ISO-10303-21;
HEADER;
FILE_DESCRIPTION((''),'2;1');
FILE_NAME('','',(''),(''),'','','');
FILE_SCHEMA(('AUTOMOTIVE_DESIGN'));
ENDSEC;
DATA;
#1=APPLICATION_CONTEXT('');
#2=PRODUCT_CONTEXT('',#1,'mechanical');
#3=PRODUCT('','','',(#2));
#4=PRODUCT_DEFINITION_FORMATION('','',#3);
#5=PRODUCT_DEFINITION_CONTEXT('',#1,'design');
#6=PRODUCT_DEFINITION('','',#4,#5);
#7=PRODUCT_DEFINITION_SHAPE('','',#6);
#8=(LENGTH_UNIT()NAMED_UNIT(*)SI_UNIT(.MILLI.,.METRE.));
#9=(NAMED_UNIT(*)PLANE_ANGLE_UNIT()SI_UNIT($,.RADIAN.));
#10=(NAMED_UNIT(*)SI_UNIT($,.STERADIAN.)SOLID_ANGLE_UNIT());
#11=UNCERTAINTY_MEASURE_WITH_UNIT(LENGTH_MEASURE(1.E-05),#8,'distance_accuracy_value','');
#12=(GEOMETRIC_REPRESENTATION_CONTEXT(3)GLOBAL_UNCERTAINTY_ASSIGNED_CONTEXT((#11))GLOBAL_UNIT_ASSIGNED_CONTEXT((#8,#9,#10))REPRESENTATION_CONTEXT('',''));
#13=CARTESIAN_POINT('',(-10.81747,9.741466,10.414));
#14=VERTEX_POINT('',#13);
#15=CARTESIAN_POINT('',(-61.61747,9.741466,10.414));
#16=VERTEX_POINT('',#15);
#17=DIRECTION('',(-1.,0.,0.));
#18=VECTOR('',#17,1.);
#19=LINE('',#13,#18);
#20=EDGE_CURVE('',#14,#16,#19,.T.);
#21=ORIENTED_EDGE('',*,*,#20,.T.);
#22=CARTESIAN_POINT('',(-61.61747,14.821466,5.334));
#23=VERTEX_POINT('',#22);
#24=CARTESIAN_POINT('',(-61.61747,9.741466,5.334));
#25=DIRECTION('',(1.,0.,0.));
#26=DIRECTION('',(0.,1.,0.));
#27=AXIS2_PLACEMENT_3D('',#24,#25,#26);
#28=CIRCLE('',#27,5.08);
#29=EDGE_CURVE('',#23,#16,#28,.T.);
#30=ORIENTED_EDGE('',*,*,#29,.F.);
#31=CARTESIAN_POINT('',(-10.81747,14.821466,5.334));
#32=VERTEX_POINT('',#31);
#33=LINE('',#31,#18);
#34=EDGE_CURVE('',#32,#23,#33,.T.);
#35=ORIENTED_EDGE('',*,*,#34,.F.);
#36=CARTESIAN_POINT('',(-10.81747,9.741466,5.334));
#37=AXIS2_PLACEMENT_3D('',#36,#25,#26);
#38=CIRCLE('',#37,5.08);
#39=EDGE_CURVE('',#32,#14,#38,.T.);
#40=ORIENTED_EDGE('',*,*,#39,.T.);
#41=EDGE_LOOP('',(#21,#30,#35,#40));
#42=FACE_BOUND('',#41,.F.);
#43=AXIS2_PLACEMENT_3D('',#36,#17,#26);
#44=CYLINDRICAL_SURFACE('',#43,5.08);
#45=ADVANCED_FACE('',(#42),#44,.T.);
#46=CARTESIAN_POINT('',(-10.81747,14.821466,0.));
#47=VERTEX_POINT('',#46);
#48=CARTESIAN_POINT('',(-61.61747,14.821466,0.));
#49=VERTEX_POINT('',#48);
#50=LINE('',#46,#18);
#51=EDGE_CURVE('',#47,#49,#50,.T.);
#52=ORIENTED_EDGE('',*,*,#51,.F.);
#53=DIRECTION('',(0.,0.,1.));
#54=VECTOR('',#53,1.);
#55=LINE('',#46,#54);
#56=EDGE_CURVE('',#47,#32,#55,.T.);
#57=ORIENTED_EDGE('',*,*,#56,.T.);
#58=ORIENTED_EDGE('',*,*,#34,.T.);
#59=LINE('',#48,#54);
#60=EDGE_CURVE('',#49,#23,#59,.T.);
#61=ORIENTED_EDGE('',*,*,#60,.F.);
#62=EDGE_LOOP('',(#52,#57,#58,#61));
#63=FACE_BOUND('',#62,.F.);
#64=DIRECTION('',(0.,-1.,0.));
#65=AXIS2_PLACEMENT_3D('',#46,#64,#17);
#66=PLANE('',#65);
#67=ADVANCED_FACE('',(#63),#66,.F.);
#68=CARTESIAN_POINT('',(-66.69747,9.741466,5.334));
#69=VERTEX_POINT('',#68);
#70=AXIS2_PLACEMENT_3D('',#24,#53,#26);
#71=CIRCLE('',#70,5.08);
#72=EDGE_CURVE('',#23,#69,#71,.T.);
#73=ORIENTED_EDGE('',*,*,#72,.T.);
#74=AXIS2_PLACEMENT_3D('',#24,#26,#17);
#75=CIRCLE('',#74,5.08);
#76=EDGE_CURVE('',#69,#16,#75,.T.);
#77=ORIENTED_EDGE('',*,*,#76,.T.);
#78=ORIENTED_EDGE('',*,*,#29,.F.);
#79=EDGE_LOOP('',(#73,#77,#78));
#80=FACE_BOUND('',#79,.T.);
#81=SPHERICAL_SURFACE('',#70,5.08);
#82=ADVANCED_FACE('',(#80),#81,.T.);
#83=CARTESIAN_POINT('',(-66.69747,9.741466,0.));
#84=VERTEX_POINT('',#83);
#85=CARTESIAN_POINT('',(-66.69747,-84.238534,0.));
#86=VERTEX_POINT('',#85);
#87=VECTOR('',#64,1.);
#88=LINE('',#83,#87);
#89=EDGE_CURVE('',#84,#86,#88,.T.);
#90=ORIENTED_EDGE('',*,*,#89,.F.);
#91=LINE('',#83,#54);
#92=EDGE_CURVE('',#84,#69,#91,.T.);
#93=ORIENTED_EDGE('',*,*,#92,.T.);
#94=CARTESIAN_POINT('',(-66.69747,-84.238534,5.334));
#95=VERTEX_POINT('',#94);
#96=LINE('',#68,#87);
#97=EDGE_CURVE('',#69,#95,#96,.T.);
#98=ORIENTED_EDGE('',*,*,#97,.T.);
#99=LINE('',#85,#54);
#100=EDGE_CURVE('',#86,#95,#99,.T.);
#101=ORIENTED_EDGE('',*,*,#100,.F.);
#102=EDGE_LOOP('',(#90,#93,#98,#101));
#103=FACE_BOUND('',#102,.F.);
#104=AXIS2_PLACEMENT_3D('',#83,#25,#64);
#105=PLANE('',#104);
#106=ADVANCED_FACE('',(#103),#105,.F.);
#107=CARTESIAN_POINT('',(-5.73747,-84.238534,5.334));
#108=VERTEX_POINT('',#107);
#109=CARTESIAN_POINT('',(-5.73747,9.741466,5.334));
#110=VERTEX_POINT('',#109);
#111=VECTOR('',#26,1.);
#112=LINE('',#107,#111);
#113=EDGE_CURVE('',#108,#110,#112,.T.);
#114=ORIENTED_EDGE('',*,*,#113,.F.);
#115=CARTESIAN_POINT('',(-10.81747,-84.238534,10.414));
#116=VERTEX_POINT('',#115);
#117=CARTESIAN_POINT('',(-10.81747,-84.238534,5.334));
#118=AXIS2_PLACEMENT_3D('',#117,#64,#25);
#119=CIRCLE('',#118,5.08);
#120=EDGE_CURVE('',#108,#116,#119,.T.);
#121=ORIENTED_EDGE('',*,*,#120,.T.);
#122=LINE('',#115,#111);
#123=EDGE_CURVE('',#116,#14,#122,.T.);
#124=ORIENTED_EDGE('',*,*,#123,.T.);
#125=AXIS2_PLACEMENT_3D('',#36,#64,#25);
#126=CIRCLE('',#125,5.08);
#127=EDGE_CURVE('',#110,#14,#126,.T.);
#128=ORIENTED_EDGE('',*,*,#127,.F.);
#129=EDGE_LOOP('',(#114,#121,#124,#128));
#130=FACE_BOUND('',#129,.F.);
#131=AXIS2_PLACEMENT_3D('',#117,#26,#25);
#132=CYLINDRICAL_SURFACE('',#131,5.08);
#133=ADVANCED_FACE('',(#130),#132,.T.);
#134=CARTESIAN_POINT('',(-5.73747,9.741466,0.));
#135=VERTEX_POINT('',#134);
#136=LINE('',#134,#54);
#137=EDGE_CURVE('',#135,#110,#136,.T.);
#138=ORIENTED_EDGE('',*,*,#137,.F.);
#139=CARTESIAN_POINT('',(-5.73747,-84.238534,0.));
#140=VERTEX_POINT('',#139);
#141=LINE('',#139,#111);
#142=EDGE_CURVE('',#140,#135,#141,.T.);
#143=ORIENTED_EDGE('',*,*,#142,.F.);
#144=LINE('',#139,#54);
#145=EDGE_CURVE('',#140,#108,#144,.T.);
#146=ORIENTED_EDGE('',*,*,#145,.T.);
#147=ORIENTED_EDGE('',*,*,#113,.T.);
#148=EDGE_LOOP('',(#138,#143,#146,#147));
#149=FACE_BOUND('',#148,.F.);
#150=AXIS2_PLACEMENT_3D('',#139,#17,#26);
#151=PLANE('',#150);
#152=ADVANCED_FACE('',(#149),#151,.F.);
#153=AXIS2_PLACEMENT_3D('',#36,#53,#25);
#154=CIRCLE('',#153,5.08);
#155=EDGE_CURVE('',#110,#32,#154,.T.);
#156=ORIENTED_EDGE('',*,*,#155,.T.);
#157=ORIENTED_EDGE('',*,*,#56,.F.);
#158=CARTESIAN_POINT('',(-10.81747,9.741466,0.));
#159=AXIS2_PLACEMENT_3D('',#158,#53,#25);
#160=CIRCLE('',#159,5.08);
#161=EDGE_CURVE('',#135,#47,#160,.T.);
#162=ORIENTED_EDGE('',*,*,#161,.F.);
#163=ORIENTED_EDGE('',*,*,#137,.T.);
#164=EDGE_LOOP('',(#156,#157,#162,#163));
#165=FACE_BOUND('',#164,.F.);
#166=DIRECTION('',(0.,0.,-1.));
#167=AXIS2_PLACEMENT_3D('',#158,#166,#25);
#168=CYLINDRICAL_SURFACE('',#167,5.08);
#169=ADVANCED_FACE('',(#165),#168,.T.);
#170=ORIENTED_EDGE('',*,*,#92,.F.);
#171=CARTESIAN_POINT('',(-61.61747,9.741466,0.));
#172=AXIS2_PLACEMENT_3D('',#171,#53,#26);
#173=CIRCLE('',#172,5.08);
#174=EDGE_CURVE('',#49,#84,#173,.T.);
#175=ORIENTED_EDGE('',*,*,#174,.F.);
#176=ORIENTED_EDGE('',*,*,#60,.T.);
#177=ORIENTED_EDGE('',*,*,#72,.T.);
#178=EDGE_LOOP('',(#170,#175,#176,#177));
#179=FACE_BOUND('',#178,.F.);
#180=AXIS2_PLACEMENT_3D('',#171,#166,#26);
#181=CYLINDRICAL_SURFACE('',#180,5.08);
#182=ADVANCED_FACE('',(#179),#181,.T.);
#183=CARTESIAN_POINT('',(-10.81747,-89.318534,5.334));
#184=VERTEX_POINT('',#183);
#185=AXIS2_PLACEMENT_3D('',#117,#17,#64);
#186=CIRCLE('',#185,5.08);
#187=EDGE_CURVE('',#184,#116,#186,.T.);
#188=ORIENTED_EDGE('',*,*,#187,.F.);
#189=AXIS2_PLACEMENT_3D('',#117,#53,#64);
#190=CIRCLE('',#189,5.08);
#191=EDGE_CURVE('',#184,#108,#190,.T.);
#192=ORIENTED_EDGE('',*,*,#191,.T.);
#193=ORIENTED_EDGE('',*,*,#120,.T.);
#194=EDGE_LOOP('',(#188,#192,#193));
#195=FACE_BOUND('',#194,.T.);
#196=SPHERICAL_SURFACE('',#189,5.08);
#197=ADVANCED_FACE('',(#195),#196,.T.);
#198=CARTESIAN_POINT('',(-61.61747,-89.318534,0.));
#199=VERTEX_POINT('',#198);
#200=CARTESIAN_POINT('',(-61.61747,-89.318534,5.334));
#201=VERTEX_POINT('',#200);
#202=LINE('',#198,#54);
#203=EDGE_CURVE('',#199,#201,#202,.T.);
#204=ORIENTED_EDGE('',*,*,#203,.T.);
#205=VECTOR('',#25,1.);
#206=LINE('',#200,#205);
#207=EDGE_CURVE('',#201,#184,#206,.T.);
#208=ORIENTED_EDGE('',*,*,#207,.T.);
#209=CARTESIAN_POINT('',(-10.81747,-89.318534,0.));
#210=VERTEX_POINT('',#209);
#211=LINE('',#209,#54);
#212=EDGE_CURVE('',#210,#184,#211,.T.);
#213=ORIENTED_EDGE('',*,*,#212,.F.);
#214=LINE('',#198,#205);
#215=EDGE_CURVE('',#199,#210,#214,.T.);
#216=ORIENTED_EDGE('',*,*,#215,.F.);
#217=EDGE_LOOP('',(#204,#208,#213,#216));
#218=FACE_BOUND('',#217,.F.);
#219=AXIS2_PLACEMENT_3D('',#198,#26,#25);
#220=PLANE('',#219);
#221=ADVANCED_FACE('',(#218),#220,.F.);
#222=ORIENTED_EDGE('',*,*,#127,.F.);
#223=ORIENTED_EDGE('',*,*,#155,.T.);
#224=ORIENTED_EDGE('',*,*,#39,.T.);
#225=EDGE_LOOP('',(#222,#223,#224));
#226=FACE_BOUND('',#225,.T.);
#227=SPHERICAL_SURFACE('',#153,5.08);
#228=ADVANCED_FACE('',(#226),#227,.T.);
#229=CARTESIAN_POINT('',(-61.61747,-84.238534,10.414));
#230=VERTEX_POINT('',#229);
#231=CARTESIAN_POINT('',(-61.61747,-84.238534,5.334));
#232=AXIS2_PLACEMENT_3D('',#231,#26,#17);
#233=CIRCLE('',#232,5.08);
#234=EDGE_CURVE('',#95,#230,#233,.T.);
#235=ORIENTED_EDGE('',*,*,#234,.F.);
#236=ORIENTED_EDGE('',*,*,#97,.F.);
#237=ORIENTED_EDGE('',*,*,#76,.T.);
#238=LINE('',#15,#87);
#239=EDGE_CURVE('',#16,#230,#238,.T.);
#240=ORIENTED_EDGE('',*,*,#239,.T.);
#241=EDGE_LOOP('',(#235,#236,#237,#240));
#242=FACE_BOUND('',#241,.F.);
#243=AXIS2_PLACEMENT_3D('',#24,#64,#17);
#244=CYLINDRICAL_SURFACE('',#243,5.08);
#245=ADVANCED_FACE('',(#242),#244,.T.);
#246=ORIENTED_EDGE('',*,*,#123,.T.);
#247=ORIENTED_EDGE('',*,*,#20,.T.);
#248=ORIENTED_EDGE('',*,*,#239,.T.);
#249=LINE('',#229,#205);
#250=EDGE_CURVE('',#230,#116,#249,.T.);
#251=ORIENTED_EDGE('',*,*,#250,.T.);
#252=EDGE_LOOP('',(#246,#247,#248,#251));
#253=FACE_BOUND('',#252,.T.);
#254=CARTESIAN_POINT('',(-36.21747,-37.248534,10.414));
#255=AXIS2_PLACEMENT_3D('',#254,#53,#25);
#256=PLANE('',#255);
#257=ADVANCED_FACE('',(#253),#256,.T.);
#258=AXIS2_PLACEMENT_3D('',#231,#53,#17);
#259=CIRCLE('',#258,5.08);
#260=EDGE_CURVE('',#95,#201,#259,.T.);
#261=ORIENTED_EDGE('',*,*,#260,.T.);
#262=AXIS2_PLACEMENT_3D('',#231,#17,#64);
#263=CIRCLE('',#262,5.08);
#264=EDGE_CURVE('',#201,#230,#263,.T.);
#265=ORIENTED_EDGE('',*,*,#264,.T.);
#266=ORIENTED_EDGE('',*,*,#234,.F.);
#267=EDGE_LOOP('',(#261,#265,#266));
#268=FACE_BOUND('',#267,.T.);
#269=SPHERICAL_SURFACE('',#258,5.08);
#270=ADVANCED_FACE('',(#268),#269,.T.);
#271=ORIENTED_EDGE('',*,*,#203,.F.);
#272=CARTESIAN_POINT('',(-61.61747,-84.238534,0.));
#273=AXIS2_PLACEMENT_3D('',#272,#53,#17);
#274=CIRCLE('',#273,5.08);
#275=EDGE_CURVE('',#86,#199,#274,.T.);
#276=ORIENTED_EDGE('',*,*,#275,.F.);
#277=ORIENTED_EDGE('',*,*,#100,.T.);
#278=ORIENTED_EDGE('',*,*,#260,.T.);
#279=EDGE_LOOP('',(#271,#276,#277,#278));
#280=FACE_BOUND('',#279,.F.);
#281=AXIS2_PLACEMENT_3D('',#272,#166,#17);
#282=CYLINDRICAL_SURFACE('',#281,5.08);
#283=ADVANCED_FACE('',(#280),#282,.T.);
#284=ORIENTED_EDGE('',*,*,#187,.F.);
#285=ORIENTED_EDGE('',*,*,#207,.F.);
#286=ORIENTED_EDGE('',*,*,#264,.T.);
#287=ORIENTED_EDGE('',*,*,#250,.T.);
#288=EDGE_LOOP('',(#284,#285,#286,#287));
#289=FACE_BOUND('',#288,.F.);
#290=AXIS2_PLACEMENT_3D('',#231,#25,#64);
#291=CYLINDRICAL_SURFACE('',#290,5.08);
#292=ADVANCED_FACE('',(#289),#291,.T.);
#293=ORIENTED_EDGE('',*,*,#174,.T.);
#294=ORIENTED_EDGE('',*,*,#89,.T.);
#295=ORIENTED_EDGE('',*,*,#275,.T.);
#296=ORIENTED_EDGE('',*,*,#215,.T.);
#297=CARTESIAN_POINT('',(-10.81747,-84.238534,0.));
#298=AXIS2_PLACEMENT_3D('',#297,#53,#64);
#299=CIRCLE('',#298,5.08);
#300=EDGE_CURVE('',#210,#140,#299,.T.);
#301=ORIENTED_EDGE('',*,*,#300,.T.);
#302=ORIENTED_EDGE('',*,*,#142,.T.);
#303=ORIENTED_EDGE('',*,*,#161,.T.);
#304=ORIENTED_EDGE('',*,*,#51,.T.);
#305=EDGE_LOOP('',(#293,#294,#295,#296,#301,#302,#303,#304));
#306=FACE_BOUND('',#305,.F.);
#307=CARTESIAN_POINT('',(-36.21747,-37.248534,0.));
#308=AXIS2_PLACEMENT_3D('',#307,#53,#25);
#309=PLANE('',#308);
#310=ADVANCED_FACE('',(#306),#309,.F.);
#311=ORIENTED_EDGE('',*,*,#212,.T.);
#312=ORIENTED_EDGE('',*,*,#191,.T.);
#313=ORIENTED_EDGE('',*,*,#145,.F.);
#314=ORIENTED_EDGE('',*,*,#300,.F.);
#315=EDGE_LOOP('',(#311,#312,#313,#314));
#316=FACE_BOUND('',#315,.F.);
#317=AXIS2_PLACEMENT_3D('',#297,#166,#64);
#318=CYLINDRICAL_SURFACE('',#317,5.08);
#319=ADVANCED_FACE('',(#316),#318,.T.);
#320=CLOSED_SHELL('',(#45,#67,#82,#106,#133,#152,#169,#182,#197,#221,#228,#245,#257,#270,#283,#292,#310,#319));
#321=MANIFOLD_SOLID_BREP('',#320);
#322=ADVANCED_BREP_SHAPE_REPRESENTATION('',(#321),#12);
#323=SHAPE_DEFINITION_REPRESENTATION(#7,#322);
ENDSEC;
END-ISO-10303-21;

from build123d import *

# Parameters (mm, degrees)
F0_R     = 17.78
F0_W     = 50.8
F0_H     = 38.1
F0_R_2   = 7.62
F1_DEPTH = 10.414
F2_R     = 5.08


with BuildPart() as f1:
    # F0 (on Top) → F1 (new body)
    with BuildSketch(Plane.XY):
        with BuildLine():
            Line((-10.817469722, 14.821465837), (-61.617469722, 14.821465837))
            ThreePointArc((-61.617469722, 14.821465837), (-65.2095721705, 13.3335682854), (-66.697469722, 9.741465837))
            Line((-66.697469722, 9.741465837), (-66.697469722, -84.238534163))
            ThreePointArc((-66.697469722, -84.238534163), (-65.2095721705, -87.8306366114), (-61.617469722, -89.318534163))
            Line((-61.617469722, -89.318534163), (-10.817469722, -89.318534163))
            ThreePointArc((-10.817469722, -89.318534163), (-7.2253672736, -87.8306366114), (-5.737469722, -84.238534163))
            Line((-5.737469722, -84.238534163), (-5.737469722, 9.741465837))
            ThreePointArc((-5.737469722, 9.741465837), (-7.2253672736, 13.3335682854), (-10.817469722, 14.821465837))
        make_face()
        with Locations((-36.217469722, -58.838534163)):
            Circle(F0_R, mode=Mode.SUBTRACT)
        with Locations((-36.217469722, -10.578534163)):
            Rectangle(F0_W, F0_H, mode=Mode.SUBTRACT)
        with Locations((-36.217469722, -10.578534163)):
            Rectangle(F0_W, F0_H)
        with Locations((-36.217469722, -58.838534163)):
            Circle(F0_R)
        with Locations((-36.217469722, -58.838534163)):
            Circle(F0_R_2, mode=Mode.SUBTRACT)
        with Locations((-36.217469722, -58.838534163)):
            Circle(F0_R_2)
    extrude(amount=F1_DEPTH)

    # F2
    f2_edges = [f1.edges().sort_by_distance(p)[0] for p in [
        (-36.21747, -89.318534, 10.414),
        (-36.21747, 14.821466, 10.414),
    ]]
    fillet(f2_edges, radius=F2_R)


solid = f1.part
